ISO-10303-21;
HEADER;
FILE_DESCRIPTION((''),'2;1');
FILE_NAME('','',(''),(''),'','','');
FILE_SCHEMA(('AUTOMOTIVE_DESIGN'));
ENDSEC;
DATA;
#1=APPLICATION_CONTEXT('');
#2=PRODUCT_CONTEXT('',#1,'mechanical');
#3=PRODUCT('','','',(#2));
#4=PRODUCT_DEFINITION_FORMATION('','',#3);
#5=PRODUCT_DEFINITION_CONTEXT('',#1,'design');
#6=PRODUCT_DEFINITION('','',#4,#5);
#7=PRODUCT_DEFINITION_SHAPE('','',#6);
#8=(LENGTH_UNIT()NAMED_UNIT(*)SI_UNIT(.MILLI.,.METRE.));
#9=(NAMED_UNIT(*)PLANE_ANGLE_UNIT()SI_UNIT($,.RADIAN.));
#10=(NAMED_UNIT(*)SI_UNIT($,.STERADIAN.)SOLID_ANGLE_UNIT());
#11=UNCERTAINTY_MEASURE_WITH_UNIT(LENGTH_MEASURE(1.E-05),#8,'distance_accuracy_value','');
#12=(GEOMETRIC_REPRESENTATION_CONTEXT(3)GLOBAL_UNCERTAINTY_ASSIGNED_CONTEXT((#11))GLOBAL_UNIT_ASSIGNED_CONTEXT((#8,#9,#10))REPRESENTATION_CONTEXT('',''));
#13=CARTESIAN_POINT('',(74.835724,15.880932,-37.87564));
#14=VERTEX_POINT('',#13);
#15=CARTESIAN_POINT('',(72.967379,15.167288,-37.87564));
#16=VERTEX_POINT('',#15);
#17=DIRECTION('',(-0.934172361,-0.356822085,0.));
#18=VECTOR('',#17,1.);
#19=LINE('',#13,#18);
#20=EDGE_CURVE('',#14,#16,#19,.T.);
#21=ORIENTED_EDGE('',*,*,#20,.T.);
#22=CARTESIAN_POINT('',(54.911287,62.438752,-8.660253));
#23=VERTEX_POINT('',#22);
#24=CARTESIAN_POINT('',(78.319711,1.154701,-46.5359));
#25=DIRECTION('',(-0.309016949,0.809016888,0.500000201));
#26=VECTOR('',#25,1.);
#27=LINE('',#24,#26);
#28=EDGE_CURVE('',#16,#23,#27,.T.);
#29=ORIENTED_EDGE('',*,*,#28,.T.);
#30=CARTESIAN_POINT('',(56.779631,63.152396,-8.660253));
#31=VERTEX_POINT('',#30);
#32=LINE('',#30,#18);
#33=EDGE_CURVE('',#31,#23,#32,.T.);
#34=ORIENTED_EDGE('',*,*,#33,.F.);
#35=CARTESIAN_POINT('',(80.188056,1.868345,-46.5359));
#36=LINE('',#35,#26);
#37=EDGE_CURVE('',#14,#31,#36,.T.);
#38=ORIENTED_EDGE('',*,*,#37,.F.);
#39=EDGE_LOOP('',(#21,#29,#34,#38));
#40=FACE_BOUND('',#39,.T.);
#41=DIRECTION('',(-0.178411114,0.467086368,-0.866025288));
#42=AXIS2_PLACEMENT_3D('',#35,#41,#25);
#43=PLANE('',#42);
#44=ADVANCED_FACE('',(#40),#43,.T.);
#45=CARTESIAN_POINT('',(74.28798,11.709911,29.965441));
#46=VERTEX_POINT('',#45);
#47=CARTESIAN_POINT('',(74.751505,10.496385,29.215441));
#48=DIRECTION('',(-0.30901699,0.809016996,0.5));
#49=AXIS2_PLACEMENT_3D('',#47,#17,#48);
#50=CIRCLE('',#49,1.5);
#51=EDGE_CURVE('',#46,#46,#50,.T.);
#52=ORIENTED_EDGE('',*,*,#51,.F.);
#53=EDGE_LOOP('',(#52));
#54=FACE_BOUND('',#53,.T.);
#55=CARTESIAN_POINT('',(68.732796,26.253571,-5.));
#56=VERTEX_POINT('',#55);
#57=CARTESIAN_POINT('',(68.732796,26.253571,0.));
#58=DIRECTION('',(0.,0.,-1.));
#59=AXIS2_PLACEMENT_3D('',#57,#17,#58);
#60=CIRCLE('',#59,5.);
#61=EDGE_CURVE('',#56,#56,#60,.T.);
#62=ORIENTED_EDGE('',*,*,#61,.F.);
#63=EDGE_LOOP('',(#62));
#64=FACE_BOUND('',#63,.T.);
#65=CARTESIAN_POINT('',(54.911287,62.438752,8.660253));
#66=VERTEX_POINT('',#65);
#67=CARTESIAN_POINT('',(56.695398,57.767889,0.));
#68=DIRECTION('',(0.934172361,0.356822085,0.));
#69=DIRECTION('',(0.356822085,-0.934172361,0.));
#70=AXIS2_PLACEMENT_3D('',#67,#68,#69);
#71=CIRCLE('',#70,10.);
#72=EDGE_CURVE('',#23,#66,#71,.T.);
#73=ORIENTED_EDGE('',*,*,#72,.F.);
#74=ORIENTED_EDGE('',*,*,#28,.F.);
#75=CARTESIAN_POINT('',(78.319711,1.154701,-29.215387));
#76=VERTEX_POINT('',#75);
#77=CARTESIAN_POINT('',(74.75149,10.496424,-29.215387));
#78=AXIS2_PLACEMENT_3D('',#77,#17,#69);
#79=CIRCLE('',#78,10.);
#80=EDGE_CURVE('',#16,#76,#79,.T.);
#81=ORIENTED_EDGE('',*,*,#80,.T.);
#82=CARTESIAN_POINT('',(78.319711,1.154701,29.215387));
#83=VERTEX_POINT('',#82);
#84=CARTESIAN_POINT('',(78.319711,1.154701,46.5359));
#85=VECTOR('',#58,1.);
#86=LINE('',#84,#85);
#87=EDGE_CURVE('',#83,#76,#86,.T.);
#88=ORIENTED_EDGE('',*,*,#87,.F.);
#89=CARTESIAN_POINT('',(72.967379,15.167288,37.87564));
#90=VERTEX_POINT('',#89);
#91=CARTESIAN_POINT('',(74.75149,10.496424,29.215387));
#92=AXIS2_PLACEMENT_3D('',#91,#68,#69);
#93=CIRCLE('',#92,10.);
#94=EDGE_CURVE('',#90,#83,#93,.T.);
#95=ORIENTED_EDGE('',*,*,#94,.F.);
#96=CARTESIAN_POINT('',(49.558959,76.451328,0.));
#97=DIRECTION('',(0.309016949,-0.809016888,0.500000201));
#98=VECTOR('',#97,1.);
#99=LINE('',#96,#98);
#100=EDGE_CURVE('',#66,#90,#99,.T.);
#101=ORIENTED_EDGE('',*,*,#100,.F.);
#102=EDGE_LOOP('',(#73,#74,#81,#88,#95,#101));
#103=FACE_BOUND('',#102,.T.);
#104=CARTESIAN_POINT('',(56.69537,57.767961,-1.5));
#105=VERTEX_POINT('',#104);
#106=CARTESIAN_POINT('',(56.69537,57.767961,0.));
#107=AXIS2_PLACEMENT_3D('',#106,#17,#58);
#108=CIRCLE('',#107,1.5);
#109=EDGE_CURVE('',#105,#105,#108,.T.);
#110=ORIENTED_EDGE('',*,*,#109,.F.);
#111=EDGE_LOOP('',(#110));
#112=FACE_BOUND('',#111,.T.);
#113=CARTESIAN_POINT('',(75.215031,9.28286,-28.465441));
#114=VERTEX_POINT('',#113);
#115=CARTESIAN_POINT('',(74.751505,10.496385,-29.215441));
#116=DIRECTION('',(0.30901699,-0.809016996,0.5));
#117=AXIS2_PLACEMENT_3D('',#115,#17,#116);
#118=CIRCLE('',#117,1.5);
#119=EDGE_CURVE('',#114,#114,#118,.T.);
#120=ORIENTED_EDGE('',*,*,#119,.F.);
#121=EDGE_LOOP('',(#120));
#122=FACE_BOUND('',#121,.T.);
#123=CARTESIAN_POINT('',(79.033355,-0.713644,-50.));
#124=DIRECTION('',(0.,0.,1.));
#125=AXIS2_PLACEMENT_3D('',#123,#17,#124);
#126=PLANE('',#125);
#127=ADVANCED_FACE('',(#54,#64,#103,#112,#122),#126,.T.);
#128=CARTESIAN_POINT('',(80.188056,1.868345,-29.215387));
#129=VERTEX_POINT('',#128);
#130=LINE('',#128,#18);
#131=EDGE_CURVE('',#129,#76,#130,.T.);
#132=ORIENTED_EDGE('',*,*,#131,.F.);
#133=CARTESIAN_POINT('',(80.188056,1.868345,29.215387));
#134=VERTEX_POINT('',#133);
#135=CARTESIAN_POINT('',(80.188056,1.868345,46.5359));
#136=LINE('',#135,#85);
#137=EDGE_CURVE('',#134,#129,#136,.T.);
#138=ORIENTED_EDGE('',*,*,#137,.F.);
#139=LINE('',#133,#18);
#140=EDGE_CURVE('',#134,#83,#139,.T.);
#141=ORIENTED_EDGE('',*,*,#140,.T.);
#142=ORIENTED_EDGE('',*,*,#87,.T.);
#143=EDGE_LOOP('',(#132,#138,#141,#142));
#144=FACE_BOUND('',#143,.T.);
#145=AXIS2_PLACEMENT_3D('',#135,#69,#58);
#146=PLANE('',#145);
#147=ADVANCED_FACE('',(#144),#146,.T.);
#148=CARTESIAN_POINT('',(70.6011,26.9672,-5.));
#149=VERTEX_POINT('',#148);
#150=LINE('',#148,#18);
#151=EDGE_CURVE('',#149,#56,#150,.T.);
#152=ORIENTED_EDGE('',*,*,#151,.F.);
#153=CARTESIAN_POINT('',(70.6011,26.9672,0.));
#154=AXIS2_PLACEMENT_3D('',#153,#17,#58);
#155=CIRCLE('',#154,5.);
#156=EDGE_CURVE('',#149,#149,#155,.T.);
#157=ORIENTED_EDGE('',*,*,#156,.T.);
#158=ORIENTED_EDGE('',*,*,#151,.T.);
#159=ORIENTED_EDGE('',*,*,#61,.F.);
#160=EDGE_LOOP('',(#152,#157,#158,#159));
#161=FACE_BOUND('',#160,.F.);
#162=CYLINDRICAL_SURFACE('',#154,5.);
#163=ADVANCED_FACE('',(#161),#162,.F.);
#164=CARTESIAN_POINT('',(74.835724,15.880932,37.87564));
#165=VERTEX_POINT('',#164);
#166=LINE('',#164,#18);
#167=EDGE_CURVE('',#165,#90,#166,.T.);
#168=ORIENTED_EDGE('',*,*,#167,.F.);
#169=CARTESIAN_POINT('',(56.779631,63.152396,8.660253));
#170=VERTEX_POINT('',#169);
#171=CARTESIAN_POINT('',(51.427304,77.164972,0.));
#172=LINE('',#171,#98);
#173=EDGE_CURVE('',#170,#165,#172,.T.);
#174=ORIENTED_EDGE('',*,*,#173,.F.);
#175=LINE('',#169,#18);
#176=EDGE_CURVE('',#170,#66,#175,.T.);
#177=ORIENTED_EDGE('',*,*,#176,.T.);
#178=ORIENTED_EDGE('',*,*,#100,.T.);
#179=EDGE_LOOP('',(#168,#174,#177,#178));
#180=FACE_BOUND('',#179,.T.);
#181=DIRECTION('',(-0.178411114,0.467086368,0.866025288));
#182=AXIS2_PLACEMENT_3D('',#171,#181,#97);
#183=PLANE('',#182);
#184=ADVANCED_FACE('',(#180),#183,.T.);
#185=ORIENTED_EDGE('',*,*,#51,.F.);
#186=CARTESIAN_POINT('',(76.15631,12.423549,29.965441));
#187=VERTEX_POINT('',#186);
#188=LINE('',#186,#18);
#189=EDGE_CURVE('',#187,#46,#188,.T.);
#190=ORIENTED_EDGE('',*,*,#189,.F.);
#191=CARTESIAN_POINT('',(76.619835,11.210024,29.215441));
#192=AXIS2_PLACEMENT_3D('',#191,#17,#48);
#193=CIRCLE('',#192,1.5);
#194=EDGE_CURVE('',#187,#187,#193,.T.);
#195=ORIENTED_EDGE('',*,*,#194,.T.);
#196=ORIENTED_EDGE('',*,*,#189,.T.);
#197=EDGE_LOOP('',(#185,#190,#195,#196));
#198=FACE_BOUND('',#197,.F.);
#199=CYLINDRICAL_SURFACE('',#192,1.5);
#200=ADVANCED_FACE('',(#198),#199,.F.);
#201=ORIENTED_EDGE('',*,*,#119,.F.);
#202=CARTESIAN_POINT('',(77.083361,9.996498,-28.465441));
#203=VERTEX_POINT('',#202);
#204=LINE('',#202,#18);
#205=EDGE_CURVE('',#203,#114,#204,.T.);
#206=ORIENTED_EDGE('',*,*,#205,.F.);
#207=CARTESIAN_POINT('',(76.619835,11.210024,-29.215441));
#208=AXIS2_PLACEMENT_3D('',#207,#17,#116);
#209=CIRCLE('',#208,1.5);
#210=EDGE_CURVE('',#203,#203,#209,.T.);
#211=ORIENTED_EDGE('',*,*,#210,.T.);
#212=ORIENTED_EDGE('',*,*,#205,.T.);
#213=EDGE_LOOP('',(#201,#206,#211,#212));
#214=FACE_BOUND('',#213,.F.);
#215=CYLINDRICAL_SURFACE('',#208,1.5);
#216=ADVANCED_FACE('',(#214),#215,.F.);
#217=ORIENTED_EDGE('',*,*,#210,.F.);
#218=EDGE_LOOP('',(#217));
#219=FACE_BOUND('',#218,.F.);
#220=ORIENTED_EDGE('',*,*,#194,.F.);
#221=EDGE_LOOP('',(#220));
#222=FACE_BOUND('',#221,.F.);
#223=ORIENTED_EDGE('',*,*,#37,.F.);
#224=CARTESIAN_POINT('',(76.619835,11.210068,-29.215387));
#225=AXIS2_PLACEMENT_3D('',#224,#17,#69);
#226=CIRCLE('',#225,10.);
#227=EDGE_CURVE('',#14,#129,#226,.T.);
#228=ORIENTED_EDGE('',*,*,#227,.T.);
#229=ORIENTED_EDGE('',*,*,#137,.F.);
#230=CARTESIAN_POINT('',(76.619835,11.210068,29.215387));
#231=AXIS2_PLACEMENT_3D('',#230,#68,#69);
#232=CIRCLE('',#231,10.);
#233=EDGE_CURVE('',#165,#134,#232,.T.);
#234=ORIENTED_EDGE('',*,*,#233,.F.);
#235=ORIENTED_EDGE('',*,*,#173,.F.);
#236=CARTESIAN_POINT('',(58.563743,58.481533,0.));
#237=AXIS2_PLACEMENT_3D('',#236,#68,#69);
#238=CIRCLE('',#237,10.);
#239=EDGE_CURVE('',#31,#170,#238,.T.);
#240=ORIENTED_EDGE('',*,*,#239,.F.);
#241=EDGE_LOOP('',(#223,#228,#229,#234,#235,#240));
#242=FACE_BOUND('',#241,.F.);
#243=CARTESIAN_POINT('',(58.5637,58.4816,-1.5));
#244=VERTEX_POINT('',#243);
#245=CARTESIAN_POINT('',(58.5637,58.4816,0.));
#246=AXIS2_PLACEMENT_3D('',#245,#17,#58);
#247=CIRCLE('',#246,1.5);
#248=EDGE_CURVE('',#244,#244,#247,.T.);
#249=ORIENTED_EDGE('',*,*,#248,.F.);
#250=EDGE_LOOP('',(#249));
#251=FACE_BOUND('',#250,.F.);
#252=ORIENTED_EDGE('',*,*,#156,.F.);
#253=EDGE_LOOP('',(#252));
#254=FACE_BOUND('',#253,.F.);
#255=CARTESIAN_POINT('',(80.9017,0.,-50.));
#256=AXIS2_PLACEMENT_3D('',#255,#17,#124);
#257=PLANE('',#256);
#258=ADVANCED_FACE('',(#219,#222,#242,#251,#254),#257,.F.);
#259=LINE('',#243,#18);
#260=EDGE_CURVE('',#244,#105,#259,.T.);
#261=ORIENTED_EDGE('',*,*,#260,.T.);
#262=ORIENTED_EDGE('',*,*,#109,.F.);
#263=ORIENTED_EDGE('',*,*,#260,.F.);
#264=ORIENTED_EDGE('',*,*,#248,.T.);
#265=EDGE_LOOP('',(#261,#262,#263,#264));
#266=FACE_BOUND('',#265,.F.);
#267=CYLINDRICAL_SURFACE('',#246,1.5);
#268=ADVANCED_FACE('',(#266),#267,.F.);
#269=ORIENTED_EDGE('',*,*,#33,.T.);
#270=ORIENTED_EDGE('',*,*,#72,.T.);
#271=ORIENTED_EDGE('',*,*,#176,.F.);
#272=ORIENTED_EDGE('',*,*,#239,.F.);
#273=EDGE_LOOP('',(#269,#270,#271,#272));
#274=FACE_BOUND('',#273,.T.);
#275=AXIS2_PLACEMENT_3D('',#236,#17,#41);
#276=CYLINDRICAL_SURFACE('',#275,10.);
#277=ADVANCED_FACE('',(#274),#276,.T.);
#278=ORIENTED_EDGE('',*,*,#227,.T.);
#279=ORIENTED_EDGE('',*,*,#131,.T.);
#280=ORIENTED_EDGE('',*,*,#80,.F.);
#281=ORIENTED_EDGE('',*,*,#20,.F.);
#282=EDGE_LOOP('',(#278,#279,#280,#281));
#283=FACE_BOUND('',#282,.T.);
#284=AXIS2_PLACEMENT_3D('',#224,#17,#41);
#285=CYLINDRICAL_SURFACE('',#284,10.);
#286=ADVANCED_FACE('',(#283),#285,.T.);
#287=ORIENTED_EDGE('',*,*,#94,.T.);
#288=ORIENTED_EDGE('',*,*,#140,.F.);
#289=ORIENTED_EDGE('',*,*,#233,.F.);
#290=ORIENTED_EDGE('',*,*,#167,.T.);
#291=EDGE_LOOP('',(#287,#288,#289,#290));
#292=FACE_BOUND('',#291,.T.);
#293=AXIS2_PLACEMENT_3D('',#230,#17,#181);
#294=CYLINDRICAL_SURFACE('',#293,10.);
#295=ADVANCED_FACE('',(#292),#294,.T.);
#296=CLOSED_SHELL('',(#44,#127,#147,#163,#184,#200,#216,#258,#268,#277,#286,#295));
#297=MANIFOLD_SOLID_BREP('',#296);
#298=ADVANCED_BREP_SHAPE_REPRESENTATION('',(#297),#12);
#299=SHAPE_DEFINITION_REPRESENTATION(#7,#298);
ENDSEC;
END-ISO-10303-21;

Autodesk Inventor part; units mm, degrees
ref_plane "YZ Plane" through (0, 0, 0) normal (1, 0, 0) x (0, 1, 0)
ref_plane "XZ Plane" through (0, 0, 0) normal (0, 1, 0) x (-1, 0, 0)
ref_plane "XY Plane" through (0, 0, 0) normal (0, 0, 1) x (1, 0, 0)
sketch "Sketch1" plane through (0, 0, 0) normal (0, 1, 0) x (-1, 0, 0)
  line L0 (-80.9017, 50) -> (80.9017, 50) construction
  line L1 (80.9017, 50) -> (80.9017, -50) construction
  line L2 (80.9017, -50) -> (-80.9017, -50) construction
  line L3 (-80.9017, -50) -> (-80.9017, 50) construction
  point P0 (0, 0)
  point P1 (0, 50)
  point P2 (80.9017, 0)
  dimension "d1" = 100
  dimension "d6" = 161.8034
sketch "Sketch2" plane through (0, 0, 0) normal (0, 0, 1) x (1, 0, 0)
  line L0 (-50, 80.9017) -> (50, 80.9017) construction
  line L1 (50, 80.9017) -> (50, -80.9017) construction
  line L2 (50, -80.9017) -> (-50, -80.9017) construction
  line L3 (-50, -80.9017) -> (-50, 80.9017) construction
  point P0 (0, 0)
  point P1 (0, 80.9017)
  point P2 (50, 0)
  dimension "d3" = 161.8034
  dimension "d7" = 100
sketch "Sketch3" plane through (0, 0, 0) normal (1, 0, 0) x (0, 1, 0)
  line L0 (-50, 80.9017) -> (50, 80.9017) construction
  line L1 (50, 80.9017) -> (50, -80.9017) construction
  line L2 (50, -80.9017) -> (-50, -80.9017) construction
  line L3 (-50, -80.9017) -> (-50, 80.9017) construction
  point P0 (0, 0)
  point P1 (50, 0)
  point P2 (0, 80.9017)
  dimension "d4" = 161.8034
  dimension "d5" = 100
sketch "Sketch7" plane through (0, 0, 0) normal (1, 0, 0) x (0, 1, 0)
  circle A0 centre (0, 0) radius 200 construction
  dimension "BallDiameter" = 400
ref_plane "Work Plane2" through (80.9017, 0, -50) normal (-0.9341724, -0.3568221, 0) x (0, 0, 1)
sketch "Sketch8" plane through (80.9017, 0, -50) normal (-0.9341724, -0.3568221, 0) x (0, 0, 1)
  line L0 (50, 86.6025) -> (0, 0) construction
  line L1 (0, 0) -> (100, 0) construction
  line L2 (100, 0) -> (50, 86.6025) construction
  line L3 (3.4641, 2) -> (50, 82.6025)
  line L4 (50, 82.6025) -> (96.5359, 2)
  line L5 (96.5359, 2) -> (3.4641, 2)
  point P0 (50, 28.8675)
  dimension "d21" = 2
  dimension "d22" = 2
  dimension "d23" = 2
extrude "Extrusion3" add sketch "Sketch8" along normal blind 2
fillet "Fillet1" radius 10 3 edges at (79.2539, 1.5115, -46.5359) (79.2539, 1.5115, 46.5359) (50.4931, 76.8082, 0)
sketch "Sketch11" plane through (80.9017, 0, -50) normal (0.9341724, 0.3568221, 0) x (0, 0, -1)
  circle A0 centre (-50, 28.8675) radius 5
  dimension "d34" = 10
hole "Hole2" at (70.6011, 26.9672, 0) direction (-0.9341724, -0.3568221, 0) diameter 10 end through all
sketch "Sketch10" plane through (80.9017, 0, -50) normal (0.9341724, 0.3568221, 0) x (0, 0, -1)
  arc A0 (-41.3397, 67.6025) -> (-58.6603, 67.6025) centre (-50, 62.6025) ccw projected
  circle A1 centre (-50, 62.6025) radius 1.5
  point P0 (-50, 28.8675)
  dimension "d25" = 3
hole "Hole1" at (58.5637, 58.4816, 0) direction (-0.9341724, -0.3568221, 0) diameter 3 end through all
pattern_circular "Circular Pattern1" count 3 over 360 about axis through (-28.8274, -11.0111, 0) along (0.9341724, 0.3568221, 0) of "Hole1"
equation "\"d1\" = IcoLen"
equation "\"d6\" = IcoWidth"
equation "\"d3\" = IcoWidth"
equation "\"d7\" = IcoLen"
equation "\"d4\" = IcoWidth"
equation "\"d5\" = IcoLen"
equation "\"BallDiameter\" = 2 * BallRadius"
equation "\"IcoLen\" = 100"
equation "\"IcoWidth\" = 1.61803 * IcoLen"
equation "\"BallRadius\" = 200"
properties part number "Frame"
